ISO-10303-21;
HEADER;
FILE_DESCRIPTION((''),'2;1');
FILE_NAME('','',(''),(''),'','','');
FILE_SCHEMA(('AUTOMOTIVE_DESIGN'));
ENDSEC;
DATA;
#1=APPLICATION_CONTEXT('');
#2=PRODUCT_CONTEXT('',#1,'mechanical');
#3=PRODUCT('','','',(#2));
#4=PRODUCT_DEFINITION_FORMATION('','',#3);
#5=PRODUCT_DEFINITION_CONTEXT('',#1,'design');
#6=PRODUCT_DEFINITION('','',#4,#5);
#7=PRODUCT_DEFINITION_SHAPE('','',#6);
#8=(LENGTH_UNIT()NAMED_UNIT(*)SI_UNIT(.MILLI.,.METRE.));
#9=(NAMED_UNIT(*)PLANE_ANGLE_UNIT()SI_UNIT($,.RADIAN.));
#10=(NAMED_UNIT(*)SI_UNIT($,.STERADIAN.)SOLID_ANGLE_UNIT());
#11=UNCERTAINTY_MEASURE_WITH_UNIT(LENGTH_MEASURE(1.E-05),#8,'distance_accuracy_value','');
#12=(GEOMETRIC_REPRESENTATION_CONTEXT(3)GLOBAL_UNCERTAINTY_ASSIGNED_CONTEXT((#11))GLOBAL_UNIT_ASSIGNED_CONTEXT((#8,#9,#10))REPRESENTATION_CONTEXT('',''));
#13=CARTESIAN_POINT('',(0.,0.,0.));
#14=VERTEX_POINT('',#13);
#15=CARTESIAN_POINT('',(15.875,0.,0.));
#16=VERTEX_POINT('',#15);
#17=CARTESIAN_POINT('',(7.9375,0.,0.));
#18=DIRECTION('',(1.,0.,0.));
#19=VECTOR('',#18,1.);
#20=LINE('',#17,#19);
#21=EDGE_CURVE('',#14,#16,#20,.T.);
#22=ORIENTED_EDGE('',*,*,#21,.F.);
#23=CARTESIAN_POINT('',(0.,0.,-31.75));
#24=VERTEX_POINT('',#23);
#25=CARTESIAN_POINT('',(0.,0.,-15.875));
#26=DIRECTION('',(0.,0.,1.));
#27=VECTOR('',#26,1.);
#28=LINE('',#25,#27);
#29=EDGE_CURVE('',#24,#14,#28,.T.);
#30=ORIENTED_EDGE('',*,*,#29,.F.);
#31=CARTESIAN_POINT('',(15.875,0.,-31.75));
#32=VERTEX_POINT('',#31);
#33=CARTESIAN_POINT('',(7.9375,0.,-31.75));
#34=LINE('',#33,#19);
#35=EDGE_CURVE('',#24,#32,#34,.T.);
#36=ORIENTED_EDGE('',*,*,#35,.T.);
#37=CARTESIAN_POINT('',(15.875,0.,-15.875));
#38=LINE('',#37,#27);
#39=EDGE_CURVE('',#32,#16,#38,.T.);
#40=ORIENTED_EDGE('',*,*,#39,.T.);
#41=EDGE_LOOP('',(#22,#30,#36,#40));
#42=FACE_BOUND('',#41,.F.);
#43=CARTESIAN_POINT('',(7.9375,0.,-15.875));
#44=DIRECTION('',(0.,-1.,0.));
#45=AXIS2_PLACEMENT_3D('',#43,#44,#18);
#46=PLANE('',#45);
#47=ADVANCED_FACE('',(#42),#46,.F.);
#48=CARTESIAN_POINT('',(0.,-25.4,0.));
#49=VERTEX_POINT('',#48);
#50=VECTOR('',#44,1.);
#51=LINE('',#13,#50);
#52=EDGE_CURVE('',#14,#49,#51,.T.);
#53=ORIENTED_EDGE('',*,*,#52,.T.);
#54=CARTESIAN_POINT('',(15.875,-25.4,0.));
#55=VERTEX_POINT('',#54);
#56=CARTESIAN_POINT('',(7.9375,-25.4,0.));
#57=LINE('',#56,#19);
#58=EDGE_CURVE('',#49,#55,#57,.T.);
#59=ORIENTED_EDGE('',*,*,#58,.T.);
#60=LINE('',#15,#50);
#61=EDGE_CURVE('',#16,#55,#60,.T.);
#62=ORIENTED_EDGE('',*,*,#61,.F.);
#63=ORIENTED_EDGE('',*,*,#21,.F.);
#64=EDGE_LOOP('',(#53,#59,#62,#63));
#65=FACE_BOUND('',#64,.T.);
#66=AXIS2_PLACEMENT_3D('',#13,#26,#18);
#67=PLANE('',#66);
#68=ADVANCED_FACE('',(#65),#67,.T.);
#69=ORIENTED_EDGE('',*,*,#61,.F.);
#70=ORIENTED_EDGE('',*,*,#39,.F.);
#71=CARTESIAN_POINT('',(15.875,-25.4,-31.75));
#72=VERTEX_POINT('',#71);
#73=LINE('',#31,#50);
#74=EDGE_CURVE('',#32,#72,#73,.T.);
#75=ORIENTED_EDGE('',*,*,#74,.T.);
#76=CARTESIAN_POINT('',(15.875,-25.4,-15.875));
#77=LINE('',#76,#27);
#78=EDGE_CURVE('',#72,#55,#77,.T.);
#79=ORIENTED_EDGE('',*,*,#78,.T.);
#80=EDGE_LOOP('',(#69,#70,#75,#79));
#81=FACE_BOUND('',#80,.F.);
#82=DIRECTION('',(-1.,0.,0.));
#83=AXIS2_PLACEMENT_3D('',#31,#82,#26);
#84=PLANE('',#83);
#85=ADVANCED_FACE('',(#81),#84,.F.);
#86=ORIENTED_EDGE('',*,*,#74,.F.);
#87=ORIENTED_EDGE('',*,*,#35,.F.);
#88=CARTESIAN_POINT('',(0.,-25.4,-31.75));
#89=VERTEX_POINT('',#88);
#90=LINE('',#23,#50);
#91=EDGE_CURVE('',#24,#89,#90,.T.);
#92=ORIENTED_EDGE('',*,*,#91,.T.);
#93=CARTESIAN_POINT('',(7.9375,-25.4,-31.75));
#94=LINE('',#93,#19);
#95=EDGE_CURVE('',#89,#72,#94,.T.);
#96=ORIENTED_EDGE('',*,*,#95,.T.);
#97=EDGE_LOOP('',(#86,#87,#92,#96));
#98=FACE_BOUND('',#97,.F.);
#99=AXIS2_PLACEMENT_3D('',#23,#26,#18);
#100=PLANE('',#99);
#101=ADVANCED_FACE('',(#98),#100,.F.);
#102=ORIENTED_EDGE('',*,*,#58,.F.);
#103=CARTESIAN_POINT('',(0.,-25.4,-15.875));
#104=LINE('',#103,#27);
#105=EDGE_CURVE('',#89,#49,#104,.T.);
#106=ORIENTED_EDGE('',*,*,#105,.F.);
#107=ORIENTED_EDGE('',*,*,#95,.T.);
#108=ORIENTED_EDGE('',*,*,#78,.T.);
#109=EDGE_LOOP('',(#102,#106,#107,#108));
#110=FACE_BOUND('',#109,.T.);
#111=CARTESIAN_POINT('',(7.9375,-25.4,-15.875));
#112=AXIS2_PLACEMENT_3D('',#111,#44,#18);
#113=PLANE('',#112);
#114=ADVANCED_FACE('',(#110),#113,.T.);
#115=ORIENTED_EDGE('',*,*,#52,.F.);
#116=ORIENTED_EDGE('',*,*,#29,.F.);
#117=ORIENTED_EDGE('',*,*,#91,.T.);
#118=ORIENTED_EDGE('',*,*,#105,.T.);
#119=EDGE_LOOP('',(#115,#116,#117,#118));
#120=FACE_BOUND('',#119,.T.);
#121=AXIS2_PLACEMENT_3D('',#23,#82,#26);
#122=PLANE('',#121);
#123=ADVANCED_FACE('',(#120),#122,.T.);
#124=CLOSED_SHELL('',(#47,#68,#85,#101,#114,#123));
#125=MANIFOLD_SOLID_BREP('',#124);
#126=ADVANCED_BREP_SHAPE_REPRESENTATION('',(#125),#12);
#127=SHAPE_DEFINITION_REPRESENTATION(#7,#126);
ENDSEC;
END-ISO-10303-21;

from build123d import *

# Parameters (mm, degrees)
F0_W     = 15.875
F0_H     = 31.75
F1_DEPTH = 25.4


# Not quite as in the source:
# - a feature names something its author has since deleted; it is built from what else it names


with BuildPart() as f1:
    # F0 (on Front) → F1 (new body)
    with BuildSketch(Plane.XZ):
        with Locations((7.9375, -15.875)):
            Rectangle(F0_W, F0_H)
    extrude(amount=F1_DEPTH)


solid = f1.part
